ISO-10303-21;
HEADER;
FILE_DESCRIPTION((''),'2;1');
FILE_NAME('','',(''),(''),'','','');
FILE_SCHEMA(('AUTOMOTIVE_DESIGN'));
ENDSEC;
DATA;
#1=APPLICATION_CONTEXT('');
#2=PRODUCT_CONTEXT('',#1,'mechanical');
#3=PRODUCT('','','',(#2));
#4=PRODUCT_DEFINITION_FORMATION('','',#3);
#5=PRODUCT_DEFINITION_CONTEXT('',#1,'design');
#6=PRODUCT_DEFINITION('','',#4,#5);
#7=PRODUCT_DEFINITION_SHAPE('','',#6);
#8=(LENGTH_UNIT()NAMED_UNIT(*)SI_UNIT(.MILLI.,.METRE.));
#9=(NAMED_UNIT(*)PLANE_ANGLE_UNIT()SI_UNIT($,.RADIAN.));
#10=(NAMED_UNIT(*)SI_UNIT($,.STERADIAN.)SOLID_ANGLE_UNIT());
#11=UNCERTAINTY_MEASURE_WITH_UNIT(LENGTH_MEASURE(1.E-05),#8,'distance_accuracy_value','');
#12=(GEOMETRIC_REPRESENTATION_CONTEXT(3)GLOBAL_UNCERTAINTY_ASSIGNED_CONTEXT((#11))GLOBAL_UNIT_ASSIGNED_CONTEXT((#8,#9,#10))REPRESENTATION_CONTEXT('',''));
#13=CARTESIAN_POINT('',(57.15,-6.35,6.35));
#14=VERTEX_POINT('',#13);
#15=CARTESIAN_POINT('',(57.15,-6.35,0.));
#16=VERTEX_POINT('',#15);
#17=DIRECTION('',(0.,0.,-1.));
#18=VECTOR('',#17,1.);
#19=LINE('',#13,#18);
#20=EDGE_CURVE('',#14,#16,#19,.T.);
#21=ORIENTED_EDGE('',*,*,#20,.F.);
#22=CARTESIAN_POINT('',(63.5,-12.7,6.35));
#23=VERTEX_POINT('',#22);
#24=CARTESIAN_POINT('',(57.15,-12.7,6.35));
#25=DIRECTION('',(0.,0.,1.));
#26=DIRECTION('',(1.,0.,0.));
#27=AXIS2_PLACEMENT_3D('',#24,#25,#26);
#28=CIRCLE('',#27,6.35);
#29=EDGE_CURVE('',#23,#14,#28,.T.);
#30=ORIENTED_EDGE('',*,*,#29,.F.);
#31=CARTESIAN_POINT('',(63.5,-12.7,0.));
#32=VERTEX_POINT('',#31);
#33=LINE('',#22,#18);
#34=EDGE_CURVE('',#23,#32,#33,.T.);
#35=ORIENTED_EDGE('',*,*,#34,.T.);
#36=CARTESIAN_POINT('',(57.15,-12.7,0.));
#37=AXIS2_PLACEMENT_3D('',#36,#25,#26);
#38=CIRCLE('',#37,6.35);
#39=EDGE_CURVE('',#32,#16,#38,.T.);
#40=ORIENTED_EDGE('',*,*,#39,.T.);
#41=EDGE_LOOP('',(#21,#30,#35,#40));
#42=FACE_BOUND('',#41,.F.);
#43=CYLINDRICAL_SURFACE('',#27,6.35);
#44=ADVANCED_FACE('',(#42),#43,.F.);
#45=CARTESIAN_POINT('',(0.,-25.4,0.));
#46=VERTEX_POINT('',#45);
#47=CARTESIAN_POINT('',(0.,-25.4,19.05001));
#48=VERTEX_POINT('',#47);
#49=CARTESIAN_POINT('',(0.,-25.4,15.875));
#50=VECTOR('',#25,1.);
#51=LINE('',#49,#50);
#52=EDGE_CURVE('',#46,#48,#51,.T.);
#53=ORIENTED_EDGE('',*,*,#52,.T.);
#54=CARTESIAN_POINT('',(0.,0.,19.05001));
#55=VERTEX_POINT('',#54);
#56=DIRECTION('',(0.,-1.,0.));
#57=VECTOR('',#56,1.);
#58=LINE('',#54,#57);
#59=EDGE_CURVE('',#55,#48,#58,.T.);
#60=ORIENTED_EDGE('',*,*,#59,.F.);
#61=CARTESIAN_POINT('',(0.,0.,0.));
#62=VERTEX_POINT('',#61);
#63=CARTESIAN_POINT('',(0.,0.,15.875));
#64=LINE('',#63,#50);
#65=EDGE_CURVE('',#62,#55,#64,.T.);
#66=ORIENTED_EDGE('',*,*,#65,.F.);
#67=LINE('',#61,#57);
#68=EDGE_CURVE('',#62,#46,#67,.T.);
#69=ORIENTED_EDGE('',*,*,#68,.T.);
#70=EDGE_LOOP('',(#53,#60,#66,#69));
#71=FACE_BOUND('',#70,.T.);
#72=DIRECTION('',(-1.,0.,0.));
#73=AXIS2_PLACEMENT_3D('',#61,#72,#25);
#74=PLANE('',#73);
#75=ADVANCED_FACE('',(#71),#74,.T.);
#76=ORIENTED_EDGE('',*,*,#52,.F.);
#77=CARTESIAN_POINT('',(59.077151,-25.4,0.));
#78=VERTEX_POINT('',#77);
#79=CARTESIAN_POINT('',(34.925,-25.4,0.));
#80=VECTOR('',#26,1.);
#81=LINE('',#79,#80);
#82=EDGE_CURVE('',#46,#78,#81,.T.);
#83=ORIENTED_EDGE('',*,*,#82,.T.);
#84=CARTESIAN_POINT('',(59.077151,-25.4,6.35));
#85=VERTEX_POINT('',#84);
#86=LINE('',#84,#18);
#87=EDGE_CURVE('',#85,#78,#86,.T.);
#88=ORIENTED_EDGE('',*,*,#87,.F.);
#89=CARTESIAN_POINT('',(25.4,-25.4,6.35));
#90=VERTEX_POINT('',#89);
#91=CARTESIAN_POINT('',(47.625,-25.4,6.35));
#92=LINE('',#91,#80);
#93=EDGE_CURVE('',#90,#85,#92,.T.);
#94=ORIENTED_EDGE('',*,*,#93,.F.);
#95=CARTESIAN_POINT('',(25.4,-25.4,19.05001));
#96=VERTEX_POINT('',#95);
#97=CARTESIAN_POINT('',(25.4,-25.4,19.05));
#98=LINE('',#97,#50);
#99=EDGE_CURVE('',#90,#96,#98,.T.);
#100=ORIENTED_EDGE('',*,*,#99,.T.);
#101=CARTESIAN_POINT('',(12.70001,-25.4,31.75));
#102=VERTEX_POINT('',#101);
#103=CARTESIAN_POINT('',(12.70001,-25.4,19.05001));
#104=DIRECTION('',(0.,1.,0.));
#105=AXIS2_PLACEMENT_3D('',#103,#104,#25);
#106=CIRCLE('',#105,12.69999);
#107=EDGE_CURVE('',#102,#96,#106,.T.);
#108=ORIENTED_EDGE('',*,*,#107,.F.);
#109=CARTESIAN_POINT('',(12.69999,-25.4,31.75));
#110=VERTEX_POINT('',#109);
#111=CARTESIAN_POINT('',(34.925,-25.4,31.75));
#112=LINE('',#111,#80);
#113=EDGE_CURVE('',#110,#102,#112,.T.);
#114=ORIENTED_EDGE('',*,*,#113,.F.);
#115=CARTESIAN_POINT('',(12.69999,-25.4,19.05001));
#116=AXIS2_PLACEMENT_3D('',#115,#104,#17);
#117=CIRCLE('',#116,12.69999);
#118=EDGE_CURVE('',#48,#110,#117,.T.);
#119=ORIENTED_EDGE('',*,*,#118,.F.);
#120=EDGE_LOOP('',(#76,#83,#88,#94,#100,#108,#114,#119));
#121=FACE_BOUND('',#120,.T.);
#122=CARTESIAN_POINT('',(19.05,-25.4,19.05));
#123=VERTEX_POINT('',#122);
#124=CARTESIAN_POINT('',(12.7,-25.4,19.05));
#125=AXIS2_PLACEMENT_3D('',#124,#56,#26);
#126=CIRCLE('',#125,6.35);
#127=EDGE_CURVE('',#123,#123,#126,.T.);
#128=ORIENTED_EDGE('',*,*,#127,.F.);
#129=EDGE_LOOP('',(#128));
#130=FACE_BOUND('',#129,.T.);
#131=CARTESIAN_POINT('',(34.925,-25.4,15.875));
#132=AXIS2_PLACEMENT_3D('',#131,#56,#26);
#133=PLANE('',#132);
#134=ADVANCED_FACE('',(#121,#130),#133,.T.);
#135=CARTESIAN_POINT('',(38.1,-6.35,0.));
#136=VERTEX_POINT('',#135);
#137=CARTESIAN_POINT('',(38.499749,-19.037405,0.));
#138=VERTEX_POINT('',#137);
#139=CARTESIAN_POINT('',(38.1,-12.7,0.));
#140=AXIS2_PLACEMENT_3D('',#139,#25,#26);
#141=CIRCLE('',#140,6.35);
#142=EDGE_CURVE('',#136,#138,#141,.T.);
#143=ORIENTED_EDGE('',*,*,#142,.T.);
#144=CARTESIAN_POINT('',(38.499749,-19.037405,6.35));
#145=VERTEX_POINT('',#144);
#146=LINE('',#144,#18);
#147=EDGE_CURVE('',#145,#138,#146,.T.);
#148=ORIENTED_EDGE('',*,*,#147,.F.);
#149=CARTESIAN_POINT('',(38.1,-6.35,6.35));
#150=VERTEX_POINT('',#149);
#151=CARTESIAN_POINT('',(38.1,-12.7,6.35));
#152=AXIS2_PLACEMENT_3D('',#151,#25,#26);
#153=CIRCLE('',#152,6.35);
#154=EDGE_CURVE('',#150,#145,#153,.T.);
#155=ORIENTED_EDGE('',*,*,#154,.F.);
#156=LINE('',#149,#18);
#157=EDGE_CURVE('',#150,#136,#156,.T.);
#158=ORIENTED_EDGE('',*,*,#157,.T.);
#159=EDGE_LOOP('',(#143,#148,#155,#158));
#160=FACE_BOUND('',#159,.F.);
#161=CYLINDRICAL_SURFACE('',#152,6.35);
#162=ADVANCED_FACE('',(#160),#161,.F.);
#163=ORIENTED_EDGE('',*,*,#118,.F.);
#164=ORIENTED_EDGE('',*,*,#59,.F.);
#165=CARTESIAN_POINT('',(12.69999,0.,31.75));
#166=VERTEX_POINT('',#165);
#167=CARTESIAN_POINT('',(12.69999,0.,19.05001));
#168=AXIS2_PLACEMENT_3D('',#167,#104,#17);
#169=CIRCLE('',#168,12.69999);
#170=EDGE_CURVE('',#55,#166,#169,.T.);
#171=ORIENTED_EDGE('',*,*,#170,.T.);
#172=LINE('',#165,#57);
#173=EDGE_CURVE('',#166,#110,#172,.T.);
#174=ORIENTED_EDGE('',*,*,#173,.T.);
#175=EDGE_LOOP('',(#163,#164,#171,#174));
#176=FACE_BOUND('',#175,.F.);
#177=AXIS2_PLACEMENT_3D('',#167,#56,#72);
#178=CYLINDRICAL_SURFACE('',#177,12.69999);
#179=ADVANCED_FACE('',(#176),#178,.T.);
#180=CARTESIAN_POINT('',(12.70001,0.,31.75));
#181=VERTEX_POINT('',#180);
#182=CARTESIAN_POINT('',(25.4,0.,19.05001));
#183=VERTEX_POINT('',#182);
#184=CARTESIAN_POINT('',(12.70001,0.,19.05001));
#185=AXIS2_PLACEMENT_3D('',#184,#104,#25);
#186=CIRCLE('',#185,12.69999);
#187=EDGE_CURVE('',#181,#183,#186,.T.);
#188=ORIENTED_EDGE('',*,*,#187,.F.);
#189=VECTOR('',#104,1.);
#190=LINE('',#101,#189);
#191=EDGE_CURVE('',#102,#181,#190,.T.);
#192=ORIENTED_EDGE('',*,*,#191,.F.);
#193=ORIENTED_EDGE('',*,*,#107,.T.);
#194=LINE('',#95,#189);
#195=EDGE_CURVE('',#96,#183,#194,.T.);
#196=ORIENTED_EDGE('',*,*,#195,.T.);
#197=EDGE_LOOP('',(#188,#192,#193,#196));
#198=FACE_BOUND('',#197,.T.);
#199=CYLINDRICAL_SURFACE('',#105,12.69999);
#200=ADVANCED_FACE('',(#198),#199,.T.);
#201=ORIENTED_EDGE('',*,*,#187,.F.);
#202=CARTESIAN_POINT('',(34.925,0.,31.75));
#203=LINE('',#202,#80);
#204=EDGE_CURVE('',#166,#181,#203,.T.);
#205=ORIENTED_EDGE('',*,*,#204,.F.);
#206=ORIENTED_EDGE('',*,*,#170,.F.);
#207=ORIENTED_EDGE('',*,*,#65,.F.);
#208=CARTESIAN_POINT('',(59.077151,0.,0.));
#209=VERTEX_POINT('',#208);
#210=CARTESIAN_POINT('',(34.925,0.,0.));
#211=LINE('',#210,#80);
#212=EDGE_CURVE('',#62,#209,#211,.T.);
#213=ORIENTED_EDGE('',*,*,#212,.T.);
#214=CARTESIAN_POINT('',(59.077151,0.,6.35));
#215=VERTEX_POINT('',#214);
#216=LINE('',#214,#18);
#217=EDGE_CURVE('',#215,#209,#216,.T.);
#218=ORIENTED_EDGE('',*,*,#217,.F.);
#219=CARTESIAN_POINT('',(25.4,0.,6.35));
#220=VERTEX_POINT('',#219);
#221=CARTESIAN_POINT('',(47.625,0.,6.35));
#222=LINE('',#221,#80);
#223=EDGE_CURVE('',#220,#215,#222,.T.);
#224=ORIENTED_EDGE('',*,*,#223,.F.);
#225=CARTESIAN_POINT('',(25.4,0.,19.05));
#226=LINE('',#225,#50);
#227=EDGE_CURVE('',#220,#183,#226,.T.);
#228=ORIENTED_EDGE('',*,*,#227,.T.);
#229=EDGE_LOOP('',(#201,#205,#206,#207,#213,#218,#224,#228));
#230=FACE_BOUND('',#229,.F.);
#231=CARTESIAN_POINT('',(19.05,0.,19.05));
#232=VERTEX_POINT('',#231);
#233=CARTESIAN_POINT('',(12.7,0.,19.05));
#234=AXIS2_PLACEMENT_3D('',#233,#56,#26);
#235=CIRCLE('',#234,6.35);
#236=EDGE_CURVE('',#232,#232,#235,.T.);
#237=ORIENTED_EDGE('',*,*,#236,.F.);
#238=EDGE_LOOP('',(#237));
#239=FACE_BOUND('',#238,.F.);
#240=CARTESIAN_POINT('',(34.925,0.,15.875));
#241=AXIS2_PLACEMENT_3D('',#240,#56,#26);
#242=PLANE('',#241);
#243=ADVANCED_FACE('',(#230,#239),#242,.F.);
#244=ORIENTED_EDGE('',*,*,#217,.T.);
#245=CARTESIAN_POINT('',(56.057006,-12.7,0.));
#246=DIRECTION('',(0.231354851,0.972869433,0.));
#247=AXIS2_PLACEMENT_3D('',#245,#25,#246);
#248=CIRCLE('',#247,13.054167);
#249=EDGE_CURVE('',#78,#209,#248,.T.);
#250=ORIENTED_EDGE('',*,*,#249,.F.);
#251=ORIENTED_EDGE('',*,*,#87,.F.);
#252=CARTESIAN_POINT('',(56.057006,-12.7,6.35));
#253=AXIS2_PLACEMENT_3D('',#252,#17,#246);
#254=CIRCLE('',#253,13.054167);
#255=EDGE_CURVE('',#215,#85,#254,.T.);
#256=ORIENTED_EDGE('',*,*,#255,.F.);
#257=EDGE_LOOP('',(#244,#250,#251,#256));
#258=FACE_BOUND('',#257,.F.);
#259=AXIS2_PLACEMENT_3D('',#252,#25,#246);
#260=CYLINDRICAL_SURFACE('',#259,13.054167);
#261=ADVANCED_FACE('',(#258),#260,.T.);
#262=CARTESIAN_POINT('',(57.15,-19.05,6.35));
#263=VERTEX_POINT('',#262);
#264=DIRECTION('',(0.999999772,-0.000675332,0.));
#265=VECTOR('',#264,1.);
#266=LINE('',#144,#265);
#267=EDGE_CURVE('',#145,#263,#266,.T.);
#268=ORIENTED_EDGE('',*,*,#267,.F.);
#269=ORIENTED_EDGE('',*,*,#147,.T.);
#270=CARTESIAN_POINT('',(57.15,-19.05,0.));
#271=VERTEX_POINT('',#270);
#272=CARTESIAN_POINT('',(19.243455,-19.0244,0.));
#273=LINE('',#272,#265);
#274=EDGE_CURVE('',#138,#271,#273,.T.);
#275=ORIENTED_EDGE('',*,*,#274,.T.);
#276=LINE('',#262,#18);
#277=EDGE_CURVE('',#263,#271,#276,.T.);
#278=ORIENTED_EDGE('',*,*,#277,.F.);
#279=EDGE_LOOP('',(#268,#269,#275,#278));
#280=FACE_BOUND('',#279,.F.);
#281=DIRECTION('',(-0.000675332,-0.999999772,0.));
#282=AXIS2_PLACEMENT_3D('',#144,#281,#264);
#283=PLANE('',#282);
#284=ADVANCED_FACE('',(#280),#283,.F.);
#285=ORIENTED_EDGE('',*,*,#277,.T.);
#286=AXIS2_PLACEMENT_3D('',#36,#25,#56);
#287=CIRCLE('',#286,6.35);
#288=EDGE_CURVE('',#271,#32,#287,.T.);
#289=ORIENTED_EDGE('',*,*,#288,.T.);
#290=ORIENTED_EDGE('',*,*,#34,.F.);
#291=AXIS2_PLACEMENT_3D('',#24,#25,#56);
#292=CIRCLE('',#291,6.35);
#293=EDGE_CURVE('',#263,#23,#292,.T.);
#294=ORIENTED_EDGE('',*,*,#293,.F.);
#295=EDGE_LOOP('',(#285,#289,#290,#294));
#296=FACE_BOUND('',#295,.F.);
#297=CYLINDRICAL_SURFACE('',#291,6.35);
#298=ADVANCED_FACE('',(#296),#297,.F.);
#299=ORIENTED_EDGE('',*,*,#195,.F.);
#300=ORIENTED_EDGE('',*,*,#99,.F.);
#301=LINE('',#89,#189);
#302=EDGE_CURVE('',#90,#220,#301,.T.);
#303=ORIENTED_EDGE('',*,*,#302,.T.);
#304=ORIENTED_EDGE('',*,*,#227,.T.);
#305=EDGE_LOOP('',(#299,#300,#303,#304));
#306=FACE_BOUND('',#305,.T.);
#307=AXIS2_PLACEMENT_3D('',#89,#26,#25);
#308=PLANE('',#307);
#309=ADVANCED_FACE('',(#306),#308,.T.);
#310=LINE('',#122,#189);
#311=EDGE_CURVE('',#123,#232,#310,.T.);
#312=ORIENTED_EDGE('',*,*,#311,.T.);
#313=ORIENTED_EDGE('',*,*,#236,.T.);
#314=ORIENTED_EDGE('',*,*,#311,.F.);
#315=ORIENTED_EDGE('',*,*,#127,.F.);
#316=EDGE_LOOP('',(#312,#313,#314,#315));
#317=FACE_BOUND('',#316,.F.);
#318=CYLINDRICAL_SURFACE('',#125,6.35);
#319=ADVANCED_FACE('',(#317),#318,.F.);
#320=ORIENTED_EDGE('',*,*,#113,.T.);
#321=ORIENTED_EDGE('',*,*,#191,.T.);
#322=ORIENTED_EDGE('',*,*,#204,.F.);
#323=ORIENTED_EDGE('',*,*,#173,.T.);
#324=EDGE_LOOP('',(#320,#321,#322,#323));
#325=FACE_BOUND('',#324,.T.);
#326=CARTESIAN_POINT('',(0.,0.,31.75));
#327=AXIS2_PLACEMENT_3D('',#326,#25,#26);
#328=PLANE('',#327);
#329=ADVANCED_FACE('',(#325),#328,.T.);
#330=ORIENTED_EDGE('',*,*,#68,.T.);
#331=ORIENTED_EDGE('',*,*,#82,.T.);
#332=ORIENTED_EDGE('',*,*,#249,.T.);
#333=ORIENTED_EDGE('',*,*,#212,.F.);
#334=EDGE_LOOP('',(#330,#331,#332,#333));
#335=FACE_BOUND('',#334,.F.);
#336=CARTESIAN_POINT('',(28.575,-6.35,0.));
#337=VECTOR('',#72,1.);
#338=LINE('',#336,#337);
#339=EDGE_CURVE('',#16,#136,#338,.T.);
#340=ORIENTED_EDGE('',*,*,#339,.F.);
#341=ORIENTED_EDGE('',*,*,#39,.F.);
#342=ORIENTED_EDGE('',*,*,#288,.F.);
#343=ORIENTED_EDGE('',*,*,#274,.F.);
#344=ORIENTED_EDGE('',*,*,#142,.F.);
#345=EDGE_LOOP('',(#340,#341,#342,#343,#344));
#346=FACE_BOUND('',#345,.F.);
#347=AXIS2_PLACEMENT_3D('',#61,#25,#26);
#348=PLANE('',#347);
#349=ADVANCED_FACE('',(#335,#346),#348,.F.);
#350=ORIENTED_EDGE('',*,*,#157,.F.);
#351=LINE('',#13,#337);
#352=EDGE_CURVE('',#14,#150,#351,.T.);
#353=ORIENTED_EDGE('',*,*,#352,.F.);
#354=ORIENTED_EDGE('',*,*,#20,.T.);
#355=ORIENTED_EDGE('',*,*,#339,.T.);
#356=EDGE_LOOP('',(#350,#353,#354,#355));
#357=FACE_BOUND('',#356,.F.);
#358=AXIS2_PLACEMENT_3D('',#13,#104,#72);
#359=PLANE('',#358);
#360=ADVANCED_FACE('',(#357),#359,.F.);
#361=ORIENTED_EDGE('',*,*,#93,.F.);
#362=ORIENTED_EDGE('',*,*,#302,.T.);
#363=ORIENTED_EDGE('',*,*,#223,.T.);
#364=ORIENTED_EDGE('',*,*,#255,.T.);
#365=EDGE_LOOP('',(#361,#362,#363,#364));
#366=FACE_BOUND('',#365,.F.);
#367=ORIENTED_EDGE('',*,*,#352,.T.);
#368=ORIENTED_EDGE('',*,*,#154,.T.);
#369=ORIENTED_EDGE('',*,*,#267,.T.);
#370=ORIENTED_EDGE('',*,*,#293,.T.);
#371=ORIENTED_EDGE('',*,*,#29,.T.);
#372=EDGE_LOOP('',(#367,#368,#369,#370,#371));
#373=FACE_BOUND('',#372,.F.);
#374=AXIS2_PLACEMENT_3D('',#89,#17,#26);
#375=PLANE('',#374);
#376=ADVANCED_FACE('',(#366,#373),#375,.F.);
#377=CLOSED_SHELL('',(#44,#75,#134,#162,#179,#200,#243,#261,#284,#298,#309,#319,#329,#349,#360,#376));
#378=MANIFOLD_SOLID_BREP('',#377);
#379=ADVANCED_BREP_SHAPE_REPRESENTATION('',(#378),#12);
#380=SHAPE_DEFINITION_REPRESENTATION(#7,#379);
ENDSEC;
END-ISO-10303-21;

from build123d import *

# Parameters (mm, degrees)
F0_W      = 69.85
F0_H      = 31.75
F1_DEPTH  = 25.4
F2_W      = 44.45
F2_H      = 25.4
F3_DEPTH  = 25.4
F4_R      = 12.69999
F5_R      = 6.35
F7_DEPTH  = 25.4
F8_DEPTH  = 25.4
F10_DEPTH = 25.4
F11_R     = 6.35
F12_DEPTH = 25.4
F14_DEPTH = 25.4


# Not quite as in the source:
# - a fillet or chamfer is up to 0.001 mm smaller than in the source, because OpenCascade refuses the exact size
# - ends of sketch curves that miss each other by under 0.0002 mm in the source are joined


with BuildPart() as f1:
    # F0 (on Front) → F1 (new body)
    with BuildSketch(Plane.XZ):
        with Locations((34.925, 15.875)):
            Rectangle(F0_W, F0_H)
    extrude(amount=F1_DEPTH)

    # F2 (on face) → F3 (cut)
    with BuildSketch(Plane.XZ.offset(25.4)):
        with Locations((47.625, 19.05)):
            Rectangle(F2_W, F2_H)
    extrude(amount=-F3_DEPTH, mode=Mode.SUBTRACT)

    # F4 (radius 12.7 in the source; OpenCascade refuses exactly that, so slightly less here)
    f4_edges = [f1.edges().sort_by_distance(p)[0] for p in [
        (25.4, -12.7, 31.75),
        (0, -12.7, 31.75),
    ]]
    fillet(f4_edges, radius=F4_R)

    # F5 (on face) → F7 (cut)
    with BuildSketch(Plane.XY.offset(6.35)):
        with Locations((38.1, -12.7)):
            Circle(F5_R)
    extrude(amount=-F7_DEPTH, mode=Mode.SUBTRACT)

    # F6 (on face) → F8 (cut)
    with BuildSketch(Plane.XY.offset(6.35)):
        with BuildLine():
            ThreePointArc((57.15, -19.05), (61.6401280605, -17.1901280605), (63.5, -12.7))
            ThreePointArc((63.5, -12.7), (61.6401280605, -8.2098719395), (57.15, -6.35))
            Line((57.15, -6.35), (38.1, -6.35))
            ThreePointArc((38.1, -6.35), (42.5901280605, -8.2098719395), (44.45, -12.7))
            ThreePointArc((44.45, -12.7), (42.7293038012, -17.046498167), (38.4997491919, -19.0374048777))
            Line((38.4997491919, -19.0374048777), (57.15, -19.05))
        make_face()
    extrude(amount=-F8_DEPTH, mode=Mode.SUBTRACT)

    # F9 (on face) → F10 (cut)
    with BuildSketch(Plane.XY.offset(6.35)):
        with BuildLine():
            ThreePointArc((63.8472363353, 0), (69.4711968718, -12.5871403191), (64.3824189901, -25.4))
            Line((64.3824189901, -25.4), (69.85, -25.4))
            Line((69.85, -25.4), (69.85, 0))
            Line((69.85, 0), (63.8472363353, 0))
        make_face()
    extrude(amount=-F10_DEPTH, mode=Mode.SUBTRACT)

    # F11 (on face) → F12 (cut)
    with BuildSketch(Plane.XZ.offset(25.4)):
        with Locations((12.7, 19.05)):
            Circle(F11_R)
    extrude(amount=-F12_DEPTH, mode=Mode.SUBTRACT)

    # F13 (on face) → F14 (cut)
    with BuildSketch(Plane.XY.offset(6.35)):
        with BuildLine():
            ThreePointArc((59.0771511197, 0), (69.1111732298, -12.7), (59.0771511197, -25.4))
            Line((59.0771511197, -25.4), (64.3824189901, -25.4))
            ThreePointArc((64.3824189901, -25.4), (69.4711968718, -12.5871403191), (63.8472363353, 0))
            Line((63.8472363353, 0), (59.0771511197, 0))
        make_face()
    extrude(amount=-F14_DEPTH, mode=Mode.SUBTRACT)


solid = f1.part
